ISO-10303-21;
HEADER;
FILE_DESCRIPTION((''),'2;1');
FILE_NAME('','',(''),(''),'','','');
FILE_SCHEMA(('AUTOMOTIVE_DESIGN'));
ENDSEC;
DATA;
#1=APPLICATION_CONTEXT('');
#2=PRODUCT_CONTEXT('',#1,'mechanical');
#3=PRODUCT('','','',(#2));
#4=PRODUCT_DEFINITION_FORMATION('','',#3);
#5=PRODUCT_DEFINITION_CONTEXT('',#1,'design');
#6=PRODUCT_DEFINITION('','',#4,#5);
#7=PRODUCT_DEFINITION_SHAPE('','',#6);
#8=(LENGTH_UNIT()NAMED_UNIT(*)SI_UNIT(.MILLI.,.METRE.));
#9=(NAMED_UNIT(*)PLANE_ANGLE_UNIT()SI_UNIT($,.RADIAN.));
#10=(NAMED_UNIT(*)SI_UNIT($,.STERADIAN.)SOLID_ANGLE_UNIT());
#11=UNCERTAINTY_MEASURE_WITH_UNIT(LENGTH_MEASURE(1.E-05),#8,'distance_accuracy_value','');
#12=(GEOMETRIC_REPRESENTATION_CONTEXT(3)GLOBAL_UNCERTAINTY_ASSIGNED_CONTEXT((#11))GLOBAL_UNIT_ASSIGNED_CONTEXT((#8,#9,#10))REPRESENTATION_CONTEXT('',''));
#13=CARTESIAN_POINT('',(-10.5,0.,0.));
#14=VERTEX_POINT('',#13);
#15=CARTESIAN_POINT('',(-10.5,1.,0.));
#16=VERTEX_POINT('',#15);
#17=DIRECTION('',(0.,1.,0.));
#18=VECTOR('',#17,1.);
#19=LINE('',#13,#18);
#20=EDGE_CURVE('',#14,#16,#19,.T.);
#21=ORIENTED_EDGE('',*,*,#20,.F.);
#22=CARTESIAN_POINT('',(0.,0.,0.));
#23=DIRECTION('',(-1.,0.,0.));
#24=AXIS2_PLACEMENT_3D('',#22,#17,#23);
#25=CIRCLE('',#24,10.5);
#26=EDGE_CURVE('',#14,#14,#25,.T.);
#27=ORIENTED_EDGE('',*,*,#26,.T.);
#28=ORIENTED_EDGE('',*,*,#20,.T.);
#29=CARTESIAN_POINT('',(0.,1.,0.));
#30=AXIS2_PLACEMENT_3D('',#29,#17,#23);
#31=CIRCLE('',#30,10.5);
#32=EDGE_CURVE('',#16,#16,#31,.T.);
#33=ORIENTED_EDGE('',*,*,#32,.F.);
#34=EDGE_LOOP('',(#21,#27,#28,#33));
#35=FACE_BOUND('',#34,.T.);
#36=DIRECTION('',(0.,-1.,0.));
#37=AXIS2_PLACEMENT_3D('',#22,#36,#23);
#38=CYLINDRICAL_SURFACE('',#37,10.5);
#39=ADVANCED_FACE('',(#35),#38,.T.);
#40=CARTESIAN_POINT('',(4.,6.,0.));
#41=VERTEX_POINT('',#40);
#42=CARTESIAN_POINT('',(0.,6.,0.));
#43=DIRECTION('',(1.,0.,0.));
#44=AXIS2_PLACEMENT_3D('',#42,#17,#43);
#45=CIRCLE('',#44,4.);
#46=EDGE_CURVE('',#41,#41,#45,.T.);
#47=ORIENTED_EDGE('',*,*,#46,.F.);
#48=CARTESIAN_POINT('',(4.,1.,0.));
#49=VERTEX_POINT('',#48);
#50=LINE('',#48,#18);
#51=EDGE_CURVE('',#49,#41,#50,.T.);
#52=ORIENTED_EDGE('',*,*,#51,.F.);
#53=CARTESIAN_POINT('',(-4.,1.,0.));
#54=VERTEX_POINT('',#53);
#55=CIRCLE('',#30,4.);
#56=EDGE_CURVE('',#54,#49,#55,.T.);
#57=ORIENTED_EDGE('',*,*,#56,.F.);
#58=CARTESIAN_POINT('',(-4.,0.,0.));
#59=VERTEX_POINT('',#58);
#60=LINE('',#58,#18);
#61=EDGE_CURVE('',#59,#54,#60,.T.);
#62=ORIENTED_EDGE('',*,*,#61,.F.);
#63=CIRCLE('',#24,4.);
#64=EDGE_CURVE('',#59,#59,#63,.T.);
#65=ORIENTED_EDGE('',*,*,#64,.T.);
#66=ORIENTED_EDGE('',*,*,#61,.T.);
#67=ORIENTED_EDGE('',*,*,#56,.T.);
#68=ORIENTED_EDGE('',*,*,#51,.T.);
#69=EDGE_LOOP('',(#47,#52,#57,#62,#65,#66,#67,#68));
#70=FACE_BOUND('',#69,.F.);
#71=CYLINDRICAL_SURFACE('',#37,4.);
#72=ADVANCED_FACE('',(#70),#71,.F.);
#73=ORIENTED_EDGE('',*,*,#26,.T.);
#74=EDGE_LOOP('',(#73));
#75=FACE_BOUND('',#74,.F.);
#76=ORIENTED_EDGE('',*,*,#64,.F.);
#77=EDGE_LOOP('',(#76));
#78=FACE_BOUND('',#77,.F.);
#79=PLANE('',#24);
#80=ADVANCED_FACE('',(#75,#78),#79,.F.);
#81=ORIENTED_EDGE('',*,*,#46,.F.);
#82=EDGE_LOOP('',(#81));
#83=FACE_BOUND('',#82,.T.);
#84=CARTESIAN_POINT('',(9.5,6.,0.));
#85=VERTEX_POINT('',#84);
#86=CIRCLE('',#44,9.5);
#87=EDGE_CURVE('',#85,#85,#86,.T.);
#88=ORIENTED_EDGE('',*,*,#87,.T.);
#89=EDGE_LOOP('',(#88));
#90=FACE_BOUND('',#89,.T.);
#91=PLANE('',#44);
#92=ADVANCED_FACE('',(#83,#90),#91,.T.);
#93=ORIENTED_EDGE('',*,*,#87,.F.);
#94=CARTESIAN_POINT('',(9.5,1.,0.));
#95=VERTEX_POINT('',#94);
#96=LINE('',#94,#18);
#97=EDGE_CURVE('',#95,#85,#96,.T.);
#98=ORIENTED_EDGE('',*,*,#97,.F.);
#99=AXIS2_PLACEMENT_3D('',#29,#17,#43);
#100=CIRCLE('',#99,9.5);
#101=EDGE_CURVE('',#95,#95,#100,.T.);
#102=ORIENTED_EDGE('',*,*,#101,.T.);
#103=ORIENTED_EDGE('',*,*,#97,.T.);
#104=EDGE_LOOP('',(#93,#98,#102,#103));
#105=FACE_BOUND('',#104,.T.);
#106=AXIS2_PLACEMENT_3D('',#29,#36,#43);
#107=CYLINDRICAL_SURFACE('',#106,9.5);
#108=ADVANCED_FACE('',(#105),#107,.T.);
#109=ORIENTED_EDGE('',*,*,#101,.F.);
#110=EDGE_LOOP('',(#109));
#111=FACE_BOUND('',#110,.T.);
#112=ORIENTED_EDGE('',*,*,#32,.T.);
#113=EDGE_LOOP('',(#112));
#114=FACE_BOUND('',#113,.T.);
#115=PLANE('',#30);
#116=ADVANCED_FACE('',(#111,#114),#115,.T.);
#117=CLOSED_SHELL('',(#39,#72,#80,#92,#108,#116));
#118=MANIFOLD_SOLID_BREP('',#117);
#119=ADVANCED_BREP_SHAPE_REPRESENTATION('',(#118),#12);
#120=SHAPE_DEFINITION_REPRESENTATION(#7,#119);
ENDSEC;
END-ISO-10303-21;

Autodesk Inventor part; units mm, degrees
ref_plane "YZ Plane" through (0, 0, 0) normal (1, 0, 0) x (0, 1, 0)
ref_plane "XZ Plane" through (0, 0, 0) normal (0, 1, 0) x (-1, 0, 0)
ref_plane "XY Plane" through (0, 0, 0) normal (0, 0, 1) x (1, 0, 0)
sketch "Sketch1" plane through (0, 0, 0) normal (0, 1, 0) x (-1, 0, 0)
  circle A0 centre (0, 0) radius 10.5
  circle A1 centre (0, 0) radius 4
  dimension "d0" = 21
  dimension "d1" = 8
extrude "Extrusion1" add sketch "Sketch1" along normal blind 1
sketch "Sketch2" plane through (0, 1, 0) normal (0, 1, 0) x (1, 0, 0)
  circle A0 centre (0, 0) radius 4 projected
  circle A1 centre (0, 0) radius 10.5 projected
  circle A2 centre (0, 0) radius 9.5
  dimension "d4" = 19
extrude "Extrusion2" add sketch "Sketch2" along normal blind 5 contours A2
properties part number "CIM Bearing"
